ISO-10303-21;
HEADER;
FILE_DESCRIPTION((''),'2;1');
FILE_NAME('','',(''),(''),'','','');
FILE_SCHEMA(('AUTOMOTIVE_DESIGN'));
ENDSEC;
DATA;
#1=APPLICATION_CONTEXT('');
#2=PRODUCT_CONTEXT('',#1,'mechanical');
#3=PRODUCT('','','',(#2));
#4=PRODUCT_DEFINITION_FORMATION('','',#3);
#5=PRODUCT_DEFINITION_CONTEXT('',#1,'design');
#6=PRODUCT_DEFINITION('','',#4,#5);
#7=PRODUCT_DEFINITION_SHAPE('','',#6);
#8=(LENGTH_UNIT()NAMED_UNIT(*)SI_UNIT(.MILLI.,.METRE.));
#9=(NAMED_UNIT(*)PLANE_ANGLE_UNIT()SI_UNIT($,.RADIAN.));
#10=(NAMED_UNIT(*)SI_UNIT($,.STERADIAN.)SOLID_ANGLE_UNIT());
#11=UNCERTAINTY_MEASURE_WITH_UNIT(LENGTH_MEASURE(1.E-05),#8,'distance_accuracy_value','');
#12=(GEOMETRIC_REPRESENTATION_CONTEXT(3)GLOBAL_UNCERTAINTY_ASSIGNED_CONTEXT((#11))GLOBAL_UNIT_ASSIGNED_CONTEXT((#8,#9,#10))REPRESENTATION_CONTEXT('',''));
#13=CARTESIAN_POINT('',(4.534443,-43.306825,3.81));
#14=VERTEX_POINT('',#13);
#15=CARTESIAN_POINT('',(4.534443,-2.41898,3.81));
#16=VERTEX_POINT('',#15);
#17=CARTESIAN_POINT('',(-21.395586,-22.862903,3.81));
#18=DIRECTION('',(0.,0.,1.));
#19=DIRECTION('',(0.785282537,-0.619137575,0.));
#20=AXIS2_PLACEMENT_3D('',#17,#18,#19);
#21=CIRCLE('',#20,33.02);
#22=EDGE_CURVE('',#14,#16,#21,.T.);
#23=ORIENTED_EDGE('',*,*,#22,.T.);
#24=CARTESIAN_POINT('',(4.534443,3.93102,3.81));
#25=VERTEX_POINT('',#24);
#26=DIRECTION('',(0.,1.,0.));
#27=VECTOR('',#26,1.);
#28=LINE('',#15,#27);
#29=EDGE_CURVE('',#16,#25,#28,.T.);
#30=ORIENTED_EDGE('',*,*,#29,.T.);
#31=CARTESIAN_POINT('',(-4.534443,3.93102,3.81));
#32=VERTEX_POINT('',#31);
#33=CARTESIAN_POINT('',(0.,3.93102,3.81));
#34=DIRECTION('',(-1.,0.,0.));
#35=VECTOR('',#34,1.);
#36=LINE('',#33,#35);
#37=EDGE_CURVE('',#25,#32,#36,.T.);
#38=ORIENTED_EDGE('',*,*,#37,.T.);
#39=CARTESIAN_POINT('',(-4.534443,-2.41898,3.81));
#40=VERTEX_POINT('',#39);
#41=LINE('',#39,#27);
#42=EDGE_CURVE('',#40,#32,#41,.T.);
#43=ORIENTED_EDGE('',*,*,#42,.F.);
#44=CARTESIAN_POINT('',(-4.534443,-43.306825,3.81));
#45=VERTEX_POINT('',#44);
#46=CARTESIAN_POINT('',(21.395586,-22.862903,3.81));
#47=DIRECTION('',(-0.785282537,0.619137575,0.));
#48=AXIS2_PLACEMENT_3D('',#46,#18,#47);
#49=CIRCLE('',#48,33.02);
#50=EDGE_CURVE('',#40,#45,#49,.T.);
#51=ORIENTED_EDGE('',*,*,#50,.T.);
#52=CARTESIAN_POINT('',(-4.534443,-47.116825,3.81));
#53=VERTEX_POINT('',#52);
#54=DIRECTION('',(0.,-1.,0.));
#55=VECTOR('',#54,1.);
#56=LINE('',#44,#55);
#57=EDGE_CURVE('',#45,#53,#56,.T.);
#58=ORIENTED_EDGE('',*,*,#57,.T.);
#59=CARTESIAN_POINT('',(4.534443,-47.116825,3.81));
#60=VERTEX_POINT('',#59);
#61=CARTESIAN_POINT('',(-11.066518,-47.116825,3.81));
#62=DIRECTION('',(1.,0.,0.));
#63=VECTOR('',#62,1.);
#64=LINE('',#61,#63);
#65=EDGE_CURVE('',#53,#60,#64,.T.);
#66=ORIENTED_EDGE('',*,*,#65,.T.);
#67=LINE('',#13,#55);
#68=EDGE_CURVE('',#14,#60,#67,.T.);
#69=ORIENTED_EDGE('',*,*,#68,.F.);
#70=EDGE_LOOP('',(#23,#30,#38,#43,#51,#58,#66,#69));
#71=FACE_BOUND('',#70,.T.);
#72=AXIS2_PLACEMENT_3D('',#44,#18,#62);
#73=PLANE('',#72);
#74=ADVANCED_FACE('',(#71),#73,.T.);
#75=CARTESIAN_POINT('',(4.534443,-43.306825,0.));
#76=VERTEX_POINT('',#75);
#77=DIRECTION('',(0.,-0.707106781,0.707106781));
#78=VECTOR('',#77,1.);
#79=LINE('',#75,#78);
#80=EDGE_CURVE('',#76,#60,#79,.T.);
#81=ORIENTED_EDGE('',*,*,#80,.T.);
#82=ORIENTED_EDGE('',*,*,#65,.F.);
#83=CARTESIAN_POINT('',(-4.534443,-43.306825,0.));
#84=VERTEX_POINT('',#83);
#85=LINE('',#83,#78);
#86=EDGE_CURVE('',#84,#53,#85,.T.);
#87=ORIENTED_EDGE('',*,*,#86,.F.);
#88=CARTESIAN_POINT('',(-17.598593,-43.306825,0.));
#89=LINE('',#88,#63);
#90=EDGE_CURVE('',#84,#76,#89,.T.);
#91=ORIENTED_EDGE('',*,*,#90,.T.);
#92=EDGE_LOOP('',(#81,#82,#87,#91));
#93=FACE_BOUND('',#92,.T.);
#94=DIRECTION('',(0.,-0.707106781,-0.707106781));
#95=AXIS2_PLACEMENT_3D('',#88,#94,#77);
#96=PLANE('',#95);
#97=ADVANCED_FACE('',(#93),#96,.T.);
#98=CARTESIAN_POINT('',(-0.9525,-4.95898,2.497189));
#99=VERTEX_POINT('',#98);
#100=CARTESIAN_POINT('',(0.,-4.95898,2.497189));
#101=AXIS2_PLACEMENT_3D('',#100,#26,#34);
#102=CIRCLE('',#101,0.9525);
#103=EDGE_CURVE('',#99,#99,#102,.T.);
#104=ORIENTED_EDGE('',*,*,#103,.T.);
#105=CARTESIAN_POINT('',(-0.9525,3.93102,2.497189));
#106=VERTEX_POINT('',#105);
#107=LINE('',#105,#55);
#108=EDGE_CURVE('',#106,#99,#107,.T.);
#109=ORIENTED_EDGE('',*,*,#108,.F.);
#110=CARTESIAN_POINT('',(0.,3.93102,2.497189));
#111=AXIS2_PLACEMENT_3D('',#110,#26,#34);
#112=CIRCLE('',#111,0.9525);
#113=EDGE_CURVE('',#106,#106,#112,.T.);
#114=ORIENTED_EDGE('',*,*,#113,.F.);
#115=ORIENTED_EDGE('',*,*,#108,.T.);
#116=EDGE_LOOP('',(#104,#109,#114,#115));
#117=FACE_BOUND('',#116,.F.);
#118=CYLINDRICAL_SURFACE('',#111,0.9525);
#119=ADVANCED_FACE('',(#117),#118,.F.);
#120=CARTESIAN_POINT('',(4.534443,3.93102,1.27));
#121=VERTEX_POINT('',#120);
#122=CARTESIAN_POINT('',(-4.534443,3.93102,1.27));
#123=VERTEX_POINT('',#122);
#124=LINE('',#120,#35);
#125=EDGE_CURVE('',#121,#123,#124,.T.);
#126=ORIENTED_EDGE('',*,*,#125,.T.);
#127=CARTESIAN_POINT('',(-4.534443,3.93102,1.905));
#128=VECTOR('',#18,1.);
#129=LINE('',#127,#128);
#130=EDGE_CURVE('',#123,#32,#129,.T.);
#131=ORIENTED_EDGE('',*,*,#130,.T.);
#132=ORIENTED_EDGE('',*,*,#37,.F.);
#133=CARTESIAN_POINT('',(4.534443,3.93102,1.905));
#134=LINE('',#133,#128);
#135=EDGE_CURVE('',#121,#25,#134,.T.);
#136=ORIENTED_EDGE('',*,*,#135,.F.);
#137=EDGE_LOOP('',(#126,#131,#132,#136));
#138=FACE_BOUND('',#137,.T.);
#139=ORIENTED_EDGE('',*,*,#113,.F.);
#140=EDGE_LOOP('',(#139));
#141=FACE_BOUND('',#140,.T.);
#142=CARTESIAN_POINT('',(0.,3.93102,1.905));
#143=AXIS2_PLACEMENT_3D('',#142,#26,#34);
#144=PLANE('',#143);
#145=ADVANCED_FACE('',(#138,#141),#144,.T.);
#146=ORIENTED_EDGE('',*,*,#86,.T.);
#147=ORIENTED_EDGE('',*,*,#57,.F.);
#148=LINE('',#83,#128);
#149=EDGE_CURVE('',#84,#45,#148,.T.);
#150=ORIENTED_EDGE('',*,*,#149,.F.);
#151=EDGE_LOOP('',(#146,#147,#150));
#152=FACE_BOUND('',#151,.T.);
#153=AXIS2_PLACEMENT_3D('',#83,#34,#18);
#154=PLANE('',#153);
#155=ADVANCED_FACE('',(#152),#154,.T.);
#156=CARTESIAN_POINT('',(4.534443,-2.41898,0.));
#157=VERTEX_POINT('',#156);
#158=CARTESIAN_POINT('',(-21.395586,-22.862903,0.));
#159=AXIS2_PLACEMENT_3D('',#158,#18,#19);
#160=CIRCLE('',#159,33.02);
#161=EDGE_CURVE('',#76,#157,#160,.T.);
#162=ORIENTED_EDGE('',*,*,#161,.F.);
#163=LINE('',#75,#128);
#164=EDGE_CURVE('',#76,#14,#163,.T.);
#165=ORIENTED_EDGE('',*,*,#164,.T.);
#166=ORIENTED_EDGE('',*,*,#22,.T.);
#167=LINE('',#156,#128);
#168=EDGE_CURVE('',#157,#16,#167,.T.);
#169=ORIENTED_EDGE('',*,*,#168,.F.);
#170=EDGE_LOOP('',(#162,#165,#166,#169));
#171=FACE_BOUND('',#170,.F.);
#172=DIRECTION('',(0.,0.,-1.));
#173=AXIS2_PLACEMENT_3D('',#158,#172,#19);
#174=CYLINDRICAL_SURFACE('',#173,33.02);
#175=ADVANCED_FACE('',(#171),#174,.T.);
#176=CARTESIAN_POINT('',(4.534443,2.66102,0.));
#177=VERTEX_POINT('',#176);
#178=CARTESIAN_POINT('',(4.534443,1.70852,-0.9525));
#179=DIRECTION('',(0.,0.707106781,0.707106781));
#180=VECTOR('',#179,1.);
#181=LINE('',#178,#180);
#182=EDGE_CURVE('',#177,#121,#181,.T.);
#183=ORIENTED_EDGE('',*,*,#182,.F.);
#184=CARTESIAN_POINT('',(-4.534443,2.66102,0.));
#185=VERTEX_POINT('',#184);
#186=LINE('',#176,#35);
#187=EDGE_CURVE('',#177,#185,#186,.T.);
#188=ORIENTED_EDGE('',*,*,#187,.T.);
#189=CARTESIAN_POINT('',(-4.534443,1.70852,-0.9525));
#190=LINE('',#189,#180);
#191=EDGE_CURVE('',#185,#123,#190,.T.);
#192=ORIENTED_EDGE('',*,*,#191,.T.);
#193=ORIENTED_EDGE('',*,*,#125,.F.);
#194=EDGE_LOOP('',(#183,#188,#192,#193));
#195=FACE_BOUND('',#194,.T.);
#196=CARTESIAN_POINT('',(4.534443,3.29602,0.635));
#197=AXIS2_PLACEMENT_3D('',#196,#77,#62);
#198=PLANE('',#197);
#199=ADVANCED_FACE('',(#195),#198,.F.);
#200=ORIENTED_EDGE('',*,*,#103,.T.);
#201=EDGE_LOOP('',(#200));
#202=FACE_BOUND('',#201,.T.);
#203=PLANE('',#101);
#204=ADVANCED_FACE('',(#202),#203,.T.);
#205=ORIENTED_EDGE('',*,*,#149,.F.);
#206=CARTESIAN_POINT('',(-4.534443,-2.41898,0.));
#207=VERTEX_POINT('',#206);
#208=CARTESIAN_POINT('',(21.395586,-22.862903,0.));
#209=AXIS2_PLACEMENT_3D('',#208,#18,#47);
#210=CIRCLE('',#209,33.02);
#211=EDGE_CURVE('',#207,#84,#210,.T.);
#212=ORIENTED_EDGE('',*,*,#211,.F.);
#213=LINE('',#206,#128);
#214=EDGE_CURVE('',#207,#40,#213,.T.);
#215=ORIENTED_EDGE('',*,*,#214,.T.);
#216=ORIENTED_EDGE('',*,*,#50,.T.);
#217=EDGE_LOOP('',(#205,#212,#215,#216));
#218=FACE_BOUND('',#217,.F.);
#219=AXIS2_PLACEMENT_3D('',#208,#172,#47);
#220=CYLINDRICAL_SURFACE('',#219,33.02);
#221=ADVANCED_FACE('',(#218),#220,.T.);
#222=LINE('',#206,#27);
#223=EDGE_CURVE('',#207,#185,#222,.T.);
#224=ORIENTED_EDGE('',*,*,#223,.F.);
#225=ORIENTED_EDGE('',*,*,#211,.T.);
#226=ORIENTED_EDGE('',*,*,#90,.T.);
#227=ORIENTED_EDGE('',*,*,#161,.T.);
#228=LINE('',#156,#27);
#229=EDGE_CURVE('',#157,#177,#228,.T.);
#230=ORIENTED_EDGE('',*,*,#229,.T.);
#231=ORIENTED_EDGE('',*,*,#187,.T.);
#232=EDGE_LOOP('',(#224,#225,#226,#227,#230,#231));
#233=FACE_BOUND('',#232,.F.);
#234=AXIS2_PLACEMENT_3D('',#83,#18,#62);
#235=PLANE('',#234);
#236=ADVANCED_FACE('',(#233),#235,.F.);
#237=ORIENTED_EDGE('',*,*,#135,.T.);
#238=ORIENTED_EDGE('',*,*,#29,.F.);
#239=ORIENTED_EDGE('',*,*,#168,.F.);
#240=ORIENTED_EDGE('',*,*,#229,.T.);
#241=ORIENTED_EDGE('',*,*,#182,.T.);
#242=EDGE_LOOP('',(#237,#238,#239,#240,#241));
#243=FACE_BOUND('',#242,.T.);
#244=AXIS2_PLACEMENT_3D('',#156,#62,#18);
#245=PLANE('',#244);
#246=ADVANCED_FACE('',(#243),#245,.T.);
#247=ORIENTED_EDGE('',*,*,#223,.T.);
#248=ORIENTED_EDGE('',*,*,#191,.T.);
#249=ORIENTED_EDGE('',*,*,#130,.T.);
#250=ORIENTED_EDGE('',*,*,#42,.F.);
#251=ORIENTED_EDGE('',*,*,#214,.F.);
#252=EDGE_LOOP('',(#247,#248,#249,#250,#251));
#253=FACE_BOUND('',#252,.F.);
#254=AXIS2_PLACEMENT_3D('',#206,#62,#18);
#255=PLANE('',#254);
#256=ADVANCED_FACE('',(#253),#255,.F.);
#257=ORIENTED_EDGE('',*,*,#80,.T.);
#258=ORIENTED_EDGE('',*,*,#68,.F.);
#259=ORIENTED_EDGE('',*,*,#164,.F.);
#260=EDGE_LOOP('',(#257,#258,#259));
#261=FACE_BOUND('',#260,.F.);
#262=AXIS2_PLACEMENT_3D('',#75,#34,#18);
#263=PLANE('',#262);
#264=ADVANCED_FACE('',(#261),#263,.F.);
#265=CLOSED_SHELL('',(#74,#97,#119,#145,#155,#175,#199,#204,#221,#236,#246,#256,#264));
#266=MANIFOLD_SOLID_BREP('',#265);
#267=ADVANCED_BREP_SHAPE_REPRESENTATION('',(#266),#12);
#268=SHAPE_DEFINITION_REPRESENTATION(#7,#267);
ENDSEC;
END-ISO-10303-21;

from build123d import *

# Parameters (mm, degrees)
F1_DEPTH    = 3.81
F2_W        = 9.0688861602
F2_H        = 3.81
F3_DEPTH    = 6.35
F4_SIZE     = 1.27
F5_W        = 9.0688861602
F5_H        = 3.81
F6_DEPTH    = 5.08
F7_T1_DEPTH = 35.1971853179
F8_R        = 0.9525
F9_DEPTH    = 8.89


# Not quite as in the source:
# - a fillet or chamfer that OpenCascade refuses, or shapes differently, is made with other operations: its cross-section is extruded or revolved along the edge and cut away or added


with BuildPart() as f1:
    # F0 (on Top) → F1 (new body)
    with BuildSketch(Plane.XY):
        with BuildLine():
            Line((4.5344430801, -2.4189800566), (-4.5344430801, -2.4189800566))
            ThreePointArc((-4.5344430801, -2.4189800566), (-11.6244136954, -22.8629027748), (-4.5344430801, -43.306825493))
            Line((-4.5344430801, -43.306825493), (4.5344430801, -43.306825493))
            ThreePointArc((4.5344430801, -43.306825493), (11.6244136954, -22.8629027748), (4.5344430801, -2.4189800566))
        make_face()
    extrude(amount=F1_DEPTH)

    # F2 (on face) → F3 (join)
    with BuildSketch(Plane(origin=(0, -2.4189800566, 0), x_dir=(-1, 0, 0), z_dir=(0, 1, 0))):
        with Locations((0, 1.905)):
            Rectangle(F2_W, F2_H)
    extrude(amount=F3_DEPTH)

    # F4
    f4_edges = [f1.edges().sort_by_distance(p)[0] for p in [
        (0, 3.93102, 0),
    ]]
    chamfer(f4_edges, length=F4_SIZE)

    # F5 (on face) → F6 (join)
    with BuildSketch(Plane.XZ.offset(43.306825493)):
        with Locations((0, 1.905)):
            Rectangle(F5_W, F5_H)
    extrude(amount=F6_DEPTH)

    # F7: chamfer of 5.08 on 1 edges, made by hand

    # F7_s2 → F7_t1 (cut)
    with BuildSketch(Plane.YZ.offset(-17.598592659)):
        Polygon((-43.306825493, 0), (-48.386825493, 5.08), (-48.386825493, 0), align=None)
    extrude(amount=F7_T1_DEPTH, mode=Mode.SUBTRACT)

    # F8 (on face) → F9 (cut)
    with BuildSketch(Plane(origin=(0, 3.9310199434, 0), x_dir=(-1, 0, 0), z_dir=(0, 1, 0))):
        with Locations((0, 2.4971892126)):
            Circle(F8_R)
    extrude(amount=-F9_DEPTH, mode=Mode.SUBTRACT)


solid = f1.part
